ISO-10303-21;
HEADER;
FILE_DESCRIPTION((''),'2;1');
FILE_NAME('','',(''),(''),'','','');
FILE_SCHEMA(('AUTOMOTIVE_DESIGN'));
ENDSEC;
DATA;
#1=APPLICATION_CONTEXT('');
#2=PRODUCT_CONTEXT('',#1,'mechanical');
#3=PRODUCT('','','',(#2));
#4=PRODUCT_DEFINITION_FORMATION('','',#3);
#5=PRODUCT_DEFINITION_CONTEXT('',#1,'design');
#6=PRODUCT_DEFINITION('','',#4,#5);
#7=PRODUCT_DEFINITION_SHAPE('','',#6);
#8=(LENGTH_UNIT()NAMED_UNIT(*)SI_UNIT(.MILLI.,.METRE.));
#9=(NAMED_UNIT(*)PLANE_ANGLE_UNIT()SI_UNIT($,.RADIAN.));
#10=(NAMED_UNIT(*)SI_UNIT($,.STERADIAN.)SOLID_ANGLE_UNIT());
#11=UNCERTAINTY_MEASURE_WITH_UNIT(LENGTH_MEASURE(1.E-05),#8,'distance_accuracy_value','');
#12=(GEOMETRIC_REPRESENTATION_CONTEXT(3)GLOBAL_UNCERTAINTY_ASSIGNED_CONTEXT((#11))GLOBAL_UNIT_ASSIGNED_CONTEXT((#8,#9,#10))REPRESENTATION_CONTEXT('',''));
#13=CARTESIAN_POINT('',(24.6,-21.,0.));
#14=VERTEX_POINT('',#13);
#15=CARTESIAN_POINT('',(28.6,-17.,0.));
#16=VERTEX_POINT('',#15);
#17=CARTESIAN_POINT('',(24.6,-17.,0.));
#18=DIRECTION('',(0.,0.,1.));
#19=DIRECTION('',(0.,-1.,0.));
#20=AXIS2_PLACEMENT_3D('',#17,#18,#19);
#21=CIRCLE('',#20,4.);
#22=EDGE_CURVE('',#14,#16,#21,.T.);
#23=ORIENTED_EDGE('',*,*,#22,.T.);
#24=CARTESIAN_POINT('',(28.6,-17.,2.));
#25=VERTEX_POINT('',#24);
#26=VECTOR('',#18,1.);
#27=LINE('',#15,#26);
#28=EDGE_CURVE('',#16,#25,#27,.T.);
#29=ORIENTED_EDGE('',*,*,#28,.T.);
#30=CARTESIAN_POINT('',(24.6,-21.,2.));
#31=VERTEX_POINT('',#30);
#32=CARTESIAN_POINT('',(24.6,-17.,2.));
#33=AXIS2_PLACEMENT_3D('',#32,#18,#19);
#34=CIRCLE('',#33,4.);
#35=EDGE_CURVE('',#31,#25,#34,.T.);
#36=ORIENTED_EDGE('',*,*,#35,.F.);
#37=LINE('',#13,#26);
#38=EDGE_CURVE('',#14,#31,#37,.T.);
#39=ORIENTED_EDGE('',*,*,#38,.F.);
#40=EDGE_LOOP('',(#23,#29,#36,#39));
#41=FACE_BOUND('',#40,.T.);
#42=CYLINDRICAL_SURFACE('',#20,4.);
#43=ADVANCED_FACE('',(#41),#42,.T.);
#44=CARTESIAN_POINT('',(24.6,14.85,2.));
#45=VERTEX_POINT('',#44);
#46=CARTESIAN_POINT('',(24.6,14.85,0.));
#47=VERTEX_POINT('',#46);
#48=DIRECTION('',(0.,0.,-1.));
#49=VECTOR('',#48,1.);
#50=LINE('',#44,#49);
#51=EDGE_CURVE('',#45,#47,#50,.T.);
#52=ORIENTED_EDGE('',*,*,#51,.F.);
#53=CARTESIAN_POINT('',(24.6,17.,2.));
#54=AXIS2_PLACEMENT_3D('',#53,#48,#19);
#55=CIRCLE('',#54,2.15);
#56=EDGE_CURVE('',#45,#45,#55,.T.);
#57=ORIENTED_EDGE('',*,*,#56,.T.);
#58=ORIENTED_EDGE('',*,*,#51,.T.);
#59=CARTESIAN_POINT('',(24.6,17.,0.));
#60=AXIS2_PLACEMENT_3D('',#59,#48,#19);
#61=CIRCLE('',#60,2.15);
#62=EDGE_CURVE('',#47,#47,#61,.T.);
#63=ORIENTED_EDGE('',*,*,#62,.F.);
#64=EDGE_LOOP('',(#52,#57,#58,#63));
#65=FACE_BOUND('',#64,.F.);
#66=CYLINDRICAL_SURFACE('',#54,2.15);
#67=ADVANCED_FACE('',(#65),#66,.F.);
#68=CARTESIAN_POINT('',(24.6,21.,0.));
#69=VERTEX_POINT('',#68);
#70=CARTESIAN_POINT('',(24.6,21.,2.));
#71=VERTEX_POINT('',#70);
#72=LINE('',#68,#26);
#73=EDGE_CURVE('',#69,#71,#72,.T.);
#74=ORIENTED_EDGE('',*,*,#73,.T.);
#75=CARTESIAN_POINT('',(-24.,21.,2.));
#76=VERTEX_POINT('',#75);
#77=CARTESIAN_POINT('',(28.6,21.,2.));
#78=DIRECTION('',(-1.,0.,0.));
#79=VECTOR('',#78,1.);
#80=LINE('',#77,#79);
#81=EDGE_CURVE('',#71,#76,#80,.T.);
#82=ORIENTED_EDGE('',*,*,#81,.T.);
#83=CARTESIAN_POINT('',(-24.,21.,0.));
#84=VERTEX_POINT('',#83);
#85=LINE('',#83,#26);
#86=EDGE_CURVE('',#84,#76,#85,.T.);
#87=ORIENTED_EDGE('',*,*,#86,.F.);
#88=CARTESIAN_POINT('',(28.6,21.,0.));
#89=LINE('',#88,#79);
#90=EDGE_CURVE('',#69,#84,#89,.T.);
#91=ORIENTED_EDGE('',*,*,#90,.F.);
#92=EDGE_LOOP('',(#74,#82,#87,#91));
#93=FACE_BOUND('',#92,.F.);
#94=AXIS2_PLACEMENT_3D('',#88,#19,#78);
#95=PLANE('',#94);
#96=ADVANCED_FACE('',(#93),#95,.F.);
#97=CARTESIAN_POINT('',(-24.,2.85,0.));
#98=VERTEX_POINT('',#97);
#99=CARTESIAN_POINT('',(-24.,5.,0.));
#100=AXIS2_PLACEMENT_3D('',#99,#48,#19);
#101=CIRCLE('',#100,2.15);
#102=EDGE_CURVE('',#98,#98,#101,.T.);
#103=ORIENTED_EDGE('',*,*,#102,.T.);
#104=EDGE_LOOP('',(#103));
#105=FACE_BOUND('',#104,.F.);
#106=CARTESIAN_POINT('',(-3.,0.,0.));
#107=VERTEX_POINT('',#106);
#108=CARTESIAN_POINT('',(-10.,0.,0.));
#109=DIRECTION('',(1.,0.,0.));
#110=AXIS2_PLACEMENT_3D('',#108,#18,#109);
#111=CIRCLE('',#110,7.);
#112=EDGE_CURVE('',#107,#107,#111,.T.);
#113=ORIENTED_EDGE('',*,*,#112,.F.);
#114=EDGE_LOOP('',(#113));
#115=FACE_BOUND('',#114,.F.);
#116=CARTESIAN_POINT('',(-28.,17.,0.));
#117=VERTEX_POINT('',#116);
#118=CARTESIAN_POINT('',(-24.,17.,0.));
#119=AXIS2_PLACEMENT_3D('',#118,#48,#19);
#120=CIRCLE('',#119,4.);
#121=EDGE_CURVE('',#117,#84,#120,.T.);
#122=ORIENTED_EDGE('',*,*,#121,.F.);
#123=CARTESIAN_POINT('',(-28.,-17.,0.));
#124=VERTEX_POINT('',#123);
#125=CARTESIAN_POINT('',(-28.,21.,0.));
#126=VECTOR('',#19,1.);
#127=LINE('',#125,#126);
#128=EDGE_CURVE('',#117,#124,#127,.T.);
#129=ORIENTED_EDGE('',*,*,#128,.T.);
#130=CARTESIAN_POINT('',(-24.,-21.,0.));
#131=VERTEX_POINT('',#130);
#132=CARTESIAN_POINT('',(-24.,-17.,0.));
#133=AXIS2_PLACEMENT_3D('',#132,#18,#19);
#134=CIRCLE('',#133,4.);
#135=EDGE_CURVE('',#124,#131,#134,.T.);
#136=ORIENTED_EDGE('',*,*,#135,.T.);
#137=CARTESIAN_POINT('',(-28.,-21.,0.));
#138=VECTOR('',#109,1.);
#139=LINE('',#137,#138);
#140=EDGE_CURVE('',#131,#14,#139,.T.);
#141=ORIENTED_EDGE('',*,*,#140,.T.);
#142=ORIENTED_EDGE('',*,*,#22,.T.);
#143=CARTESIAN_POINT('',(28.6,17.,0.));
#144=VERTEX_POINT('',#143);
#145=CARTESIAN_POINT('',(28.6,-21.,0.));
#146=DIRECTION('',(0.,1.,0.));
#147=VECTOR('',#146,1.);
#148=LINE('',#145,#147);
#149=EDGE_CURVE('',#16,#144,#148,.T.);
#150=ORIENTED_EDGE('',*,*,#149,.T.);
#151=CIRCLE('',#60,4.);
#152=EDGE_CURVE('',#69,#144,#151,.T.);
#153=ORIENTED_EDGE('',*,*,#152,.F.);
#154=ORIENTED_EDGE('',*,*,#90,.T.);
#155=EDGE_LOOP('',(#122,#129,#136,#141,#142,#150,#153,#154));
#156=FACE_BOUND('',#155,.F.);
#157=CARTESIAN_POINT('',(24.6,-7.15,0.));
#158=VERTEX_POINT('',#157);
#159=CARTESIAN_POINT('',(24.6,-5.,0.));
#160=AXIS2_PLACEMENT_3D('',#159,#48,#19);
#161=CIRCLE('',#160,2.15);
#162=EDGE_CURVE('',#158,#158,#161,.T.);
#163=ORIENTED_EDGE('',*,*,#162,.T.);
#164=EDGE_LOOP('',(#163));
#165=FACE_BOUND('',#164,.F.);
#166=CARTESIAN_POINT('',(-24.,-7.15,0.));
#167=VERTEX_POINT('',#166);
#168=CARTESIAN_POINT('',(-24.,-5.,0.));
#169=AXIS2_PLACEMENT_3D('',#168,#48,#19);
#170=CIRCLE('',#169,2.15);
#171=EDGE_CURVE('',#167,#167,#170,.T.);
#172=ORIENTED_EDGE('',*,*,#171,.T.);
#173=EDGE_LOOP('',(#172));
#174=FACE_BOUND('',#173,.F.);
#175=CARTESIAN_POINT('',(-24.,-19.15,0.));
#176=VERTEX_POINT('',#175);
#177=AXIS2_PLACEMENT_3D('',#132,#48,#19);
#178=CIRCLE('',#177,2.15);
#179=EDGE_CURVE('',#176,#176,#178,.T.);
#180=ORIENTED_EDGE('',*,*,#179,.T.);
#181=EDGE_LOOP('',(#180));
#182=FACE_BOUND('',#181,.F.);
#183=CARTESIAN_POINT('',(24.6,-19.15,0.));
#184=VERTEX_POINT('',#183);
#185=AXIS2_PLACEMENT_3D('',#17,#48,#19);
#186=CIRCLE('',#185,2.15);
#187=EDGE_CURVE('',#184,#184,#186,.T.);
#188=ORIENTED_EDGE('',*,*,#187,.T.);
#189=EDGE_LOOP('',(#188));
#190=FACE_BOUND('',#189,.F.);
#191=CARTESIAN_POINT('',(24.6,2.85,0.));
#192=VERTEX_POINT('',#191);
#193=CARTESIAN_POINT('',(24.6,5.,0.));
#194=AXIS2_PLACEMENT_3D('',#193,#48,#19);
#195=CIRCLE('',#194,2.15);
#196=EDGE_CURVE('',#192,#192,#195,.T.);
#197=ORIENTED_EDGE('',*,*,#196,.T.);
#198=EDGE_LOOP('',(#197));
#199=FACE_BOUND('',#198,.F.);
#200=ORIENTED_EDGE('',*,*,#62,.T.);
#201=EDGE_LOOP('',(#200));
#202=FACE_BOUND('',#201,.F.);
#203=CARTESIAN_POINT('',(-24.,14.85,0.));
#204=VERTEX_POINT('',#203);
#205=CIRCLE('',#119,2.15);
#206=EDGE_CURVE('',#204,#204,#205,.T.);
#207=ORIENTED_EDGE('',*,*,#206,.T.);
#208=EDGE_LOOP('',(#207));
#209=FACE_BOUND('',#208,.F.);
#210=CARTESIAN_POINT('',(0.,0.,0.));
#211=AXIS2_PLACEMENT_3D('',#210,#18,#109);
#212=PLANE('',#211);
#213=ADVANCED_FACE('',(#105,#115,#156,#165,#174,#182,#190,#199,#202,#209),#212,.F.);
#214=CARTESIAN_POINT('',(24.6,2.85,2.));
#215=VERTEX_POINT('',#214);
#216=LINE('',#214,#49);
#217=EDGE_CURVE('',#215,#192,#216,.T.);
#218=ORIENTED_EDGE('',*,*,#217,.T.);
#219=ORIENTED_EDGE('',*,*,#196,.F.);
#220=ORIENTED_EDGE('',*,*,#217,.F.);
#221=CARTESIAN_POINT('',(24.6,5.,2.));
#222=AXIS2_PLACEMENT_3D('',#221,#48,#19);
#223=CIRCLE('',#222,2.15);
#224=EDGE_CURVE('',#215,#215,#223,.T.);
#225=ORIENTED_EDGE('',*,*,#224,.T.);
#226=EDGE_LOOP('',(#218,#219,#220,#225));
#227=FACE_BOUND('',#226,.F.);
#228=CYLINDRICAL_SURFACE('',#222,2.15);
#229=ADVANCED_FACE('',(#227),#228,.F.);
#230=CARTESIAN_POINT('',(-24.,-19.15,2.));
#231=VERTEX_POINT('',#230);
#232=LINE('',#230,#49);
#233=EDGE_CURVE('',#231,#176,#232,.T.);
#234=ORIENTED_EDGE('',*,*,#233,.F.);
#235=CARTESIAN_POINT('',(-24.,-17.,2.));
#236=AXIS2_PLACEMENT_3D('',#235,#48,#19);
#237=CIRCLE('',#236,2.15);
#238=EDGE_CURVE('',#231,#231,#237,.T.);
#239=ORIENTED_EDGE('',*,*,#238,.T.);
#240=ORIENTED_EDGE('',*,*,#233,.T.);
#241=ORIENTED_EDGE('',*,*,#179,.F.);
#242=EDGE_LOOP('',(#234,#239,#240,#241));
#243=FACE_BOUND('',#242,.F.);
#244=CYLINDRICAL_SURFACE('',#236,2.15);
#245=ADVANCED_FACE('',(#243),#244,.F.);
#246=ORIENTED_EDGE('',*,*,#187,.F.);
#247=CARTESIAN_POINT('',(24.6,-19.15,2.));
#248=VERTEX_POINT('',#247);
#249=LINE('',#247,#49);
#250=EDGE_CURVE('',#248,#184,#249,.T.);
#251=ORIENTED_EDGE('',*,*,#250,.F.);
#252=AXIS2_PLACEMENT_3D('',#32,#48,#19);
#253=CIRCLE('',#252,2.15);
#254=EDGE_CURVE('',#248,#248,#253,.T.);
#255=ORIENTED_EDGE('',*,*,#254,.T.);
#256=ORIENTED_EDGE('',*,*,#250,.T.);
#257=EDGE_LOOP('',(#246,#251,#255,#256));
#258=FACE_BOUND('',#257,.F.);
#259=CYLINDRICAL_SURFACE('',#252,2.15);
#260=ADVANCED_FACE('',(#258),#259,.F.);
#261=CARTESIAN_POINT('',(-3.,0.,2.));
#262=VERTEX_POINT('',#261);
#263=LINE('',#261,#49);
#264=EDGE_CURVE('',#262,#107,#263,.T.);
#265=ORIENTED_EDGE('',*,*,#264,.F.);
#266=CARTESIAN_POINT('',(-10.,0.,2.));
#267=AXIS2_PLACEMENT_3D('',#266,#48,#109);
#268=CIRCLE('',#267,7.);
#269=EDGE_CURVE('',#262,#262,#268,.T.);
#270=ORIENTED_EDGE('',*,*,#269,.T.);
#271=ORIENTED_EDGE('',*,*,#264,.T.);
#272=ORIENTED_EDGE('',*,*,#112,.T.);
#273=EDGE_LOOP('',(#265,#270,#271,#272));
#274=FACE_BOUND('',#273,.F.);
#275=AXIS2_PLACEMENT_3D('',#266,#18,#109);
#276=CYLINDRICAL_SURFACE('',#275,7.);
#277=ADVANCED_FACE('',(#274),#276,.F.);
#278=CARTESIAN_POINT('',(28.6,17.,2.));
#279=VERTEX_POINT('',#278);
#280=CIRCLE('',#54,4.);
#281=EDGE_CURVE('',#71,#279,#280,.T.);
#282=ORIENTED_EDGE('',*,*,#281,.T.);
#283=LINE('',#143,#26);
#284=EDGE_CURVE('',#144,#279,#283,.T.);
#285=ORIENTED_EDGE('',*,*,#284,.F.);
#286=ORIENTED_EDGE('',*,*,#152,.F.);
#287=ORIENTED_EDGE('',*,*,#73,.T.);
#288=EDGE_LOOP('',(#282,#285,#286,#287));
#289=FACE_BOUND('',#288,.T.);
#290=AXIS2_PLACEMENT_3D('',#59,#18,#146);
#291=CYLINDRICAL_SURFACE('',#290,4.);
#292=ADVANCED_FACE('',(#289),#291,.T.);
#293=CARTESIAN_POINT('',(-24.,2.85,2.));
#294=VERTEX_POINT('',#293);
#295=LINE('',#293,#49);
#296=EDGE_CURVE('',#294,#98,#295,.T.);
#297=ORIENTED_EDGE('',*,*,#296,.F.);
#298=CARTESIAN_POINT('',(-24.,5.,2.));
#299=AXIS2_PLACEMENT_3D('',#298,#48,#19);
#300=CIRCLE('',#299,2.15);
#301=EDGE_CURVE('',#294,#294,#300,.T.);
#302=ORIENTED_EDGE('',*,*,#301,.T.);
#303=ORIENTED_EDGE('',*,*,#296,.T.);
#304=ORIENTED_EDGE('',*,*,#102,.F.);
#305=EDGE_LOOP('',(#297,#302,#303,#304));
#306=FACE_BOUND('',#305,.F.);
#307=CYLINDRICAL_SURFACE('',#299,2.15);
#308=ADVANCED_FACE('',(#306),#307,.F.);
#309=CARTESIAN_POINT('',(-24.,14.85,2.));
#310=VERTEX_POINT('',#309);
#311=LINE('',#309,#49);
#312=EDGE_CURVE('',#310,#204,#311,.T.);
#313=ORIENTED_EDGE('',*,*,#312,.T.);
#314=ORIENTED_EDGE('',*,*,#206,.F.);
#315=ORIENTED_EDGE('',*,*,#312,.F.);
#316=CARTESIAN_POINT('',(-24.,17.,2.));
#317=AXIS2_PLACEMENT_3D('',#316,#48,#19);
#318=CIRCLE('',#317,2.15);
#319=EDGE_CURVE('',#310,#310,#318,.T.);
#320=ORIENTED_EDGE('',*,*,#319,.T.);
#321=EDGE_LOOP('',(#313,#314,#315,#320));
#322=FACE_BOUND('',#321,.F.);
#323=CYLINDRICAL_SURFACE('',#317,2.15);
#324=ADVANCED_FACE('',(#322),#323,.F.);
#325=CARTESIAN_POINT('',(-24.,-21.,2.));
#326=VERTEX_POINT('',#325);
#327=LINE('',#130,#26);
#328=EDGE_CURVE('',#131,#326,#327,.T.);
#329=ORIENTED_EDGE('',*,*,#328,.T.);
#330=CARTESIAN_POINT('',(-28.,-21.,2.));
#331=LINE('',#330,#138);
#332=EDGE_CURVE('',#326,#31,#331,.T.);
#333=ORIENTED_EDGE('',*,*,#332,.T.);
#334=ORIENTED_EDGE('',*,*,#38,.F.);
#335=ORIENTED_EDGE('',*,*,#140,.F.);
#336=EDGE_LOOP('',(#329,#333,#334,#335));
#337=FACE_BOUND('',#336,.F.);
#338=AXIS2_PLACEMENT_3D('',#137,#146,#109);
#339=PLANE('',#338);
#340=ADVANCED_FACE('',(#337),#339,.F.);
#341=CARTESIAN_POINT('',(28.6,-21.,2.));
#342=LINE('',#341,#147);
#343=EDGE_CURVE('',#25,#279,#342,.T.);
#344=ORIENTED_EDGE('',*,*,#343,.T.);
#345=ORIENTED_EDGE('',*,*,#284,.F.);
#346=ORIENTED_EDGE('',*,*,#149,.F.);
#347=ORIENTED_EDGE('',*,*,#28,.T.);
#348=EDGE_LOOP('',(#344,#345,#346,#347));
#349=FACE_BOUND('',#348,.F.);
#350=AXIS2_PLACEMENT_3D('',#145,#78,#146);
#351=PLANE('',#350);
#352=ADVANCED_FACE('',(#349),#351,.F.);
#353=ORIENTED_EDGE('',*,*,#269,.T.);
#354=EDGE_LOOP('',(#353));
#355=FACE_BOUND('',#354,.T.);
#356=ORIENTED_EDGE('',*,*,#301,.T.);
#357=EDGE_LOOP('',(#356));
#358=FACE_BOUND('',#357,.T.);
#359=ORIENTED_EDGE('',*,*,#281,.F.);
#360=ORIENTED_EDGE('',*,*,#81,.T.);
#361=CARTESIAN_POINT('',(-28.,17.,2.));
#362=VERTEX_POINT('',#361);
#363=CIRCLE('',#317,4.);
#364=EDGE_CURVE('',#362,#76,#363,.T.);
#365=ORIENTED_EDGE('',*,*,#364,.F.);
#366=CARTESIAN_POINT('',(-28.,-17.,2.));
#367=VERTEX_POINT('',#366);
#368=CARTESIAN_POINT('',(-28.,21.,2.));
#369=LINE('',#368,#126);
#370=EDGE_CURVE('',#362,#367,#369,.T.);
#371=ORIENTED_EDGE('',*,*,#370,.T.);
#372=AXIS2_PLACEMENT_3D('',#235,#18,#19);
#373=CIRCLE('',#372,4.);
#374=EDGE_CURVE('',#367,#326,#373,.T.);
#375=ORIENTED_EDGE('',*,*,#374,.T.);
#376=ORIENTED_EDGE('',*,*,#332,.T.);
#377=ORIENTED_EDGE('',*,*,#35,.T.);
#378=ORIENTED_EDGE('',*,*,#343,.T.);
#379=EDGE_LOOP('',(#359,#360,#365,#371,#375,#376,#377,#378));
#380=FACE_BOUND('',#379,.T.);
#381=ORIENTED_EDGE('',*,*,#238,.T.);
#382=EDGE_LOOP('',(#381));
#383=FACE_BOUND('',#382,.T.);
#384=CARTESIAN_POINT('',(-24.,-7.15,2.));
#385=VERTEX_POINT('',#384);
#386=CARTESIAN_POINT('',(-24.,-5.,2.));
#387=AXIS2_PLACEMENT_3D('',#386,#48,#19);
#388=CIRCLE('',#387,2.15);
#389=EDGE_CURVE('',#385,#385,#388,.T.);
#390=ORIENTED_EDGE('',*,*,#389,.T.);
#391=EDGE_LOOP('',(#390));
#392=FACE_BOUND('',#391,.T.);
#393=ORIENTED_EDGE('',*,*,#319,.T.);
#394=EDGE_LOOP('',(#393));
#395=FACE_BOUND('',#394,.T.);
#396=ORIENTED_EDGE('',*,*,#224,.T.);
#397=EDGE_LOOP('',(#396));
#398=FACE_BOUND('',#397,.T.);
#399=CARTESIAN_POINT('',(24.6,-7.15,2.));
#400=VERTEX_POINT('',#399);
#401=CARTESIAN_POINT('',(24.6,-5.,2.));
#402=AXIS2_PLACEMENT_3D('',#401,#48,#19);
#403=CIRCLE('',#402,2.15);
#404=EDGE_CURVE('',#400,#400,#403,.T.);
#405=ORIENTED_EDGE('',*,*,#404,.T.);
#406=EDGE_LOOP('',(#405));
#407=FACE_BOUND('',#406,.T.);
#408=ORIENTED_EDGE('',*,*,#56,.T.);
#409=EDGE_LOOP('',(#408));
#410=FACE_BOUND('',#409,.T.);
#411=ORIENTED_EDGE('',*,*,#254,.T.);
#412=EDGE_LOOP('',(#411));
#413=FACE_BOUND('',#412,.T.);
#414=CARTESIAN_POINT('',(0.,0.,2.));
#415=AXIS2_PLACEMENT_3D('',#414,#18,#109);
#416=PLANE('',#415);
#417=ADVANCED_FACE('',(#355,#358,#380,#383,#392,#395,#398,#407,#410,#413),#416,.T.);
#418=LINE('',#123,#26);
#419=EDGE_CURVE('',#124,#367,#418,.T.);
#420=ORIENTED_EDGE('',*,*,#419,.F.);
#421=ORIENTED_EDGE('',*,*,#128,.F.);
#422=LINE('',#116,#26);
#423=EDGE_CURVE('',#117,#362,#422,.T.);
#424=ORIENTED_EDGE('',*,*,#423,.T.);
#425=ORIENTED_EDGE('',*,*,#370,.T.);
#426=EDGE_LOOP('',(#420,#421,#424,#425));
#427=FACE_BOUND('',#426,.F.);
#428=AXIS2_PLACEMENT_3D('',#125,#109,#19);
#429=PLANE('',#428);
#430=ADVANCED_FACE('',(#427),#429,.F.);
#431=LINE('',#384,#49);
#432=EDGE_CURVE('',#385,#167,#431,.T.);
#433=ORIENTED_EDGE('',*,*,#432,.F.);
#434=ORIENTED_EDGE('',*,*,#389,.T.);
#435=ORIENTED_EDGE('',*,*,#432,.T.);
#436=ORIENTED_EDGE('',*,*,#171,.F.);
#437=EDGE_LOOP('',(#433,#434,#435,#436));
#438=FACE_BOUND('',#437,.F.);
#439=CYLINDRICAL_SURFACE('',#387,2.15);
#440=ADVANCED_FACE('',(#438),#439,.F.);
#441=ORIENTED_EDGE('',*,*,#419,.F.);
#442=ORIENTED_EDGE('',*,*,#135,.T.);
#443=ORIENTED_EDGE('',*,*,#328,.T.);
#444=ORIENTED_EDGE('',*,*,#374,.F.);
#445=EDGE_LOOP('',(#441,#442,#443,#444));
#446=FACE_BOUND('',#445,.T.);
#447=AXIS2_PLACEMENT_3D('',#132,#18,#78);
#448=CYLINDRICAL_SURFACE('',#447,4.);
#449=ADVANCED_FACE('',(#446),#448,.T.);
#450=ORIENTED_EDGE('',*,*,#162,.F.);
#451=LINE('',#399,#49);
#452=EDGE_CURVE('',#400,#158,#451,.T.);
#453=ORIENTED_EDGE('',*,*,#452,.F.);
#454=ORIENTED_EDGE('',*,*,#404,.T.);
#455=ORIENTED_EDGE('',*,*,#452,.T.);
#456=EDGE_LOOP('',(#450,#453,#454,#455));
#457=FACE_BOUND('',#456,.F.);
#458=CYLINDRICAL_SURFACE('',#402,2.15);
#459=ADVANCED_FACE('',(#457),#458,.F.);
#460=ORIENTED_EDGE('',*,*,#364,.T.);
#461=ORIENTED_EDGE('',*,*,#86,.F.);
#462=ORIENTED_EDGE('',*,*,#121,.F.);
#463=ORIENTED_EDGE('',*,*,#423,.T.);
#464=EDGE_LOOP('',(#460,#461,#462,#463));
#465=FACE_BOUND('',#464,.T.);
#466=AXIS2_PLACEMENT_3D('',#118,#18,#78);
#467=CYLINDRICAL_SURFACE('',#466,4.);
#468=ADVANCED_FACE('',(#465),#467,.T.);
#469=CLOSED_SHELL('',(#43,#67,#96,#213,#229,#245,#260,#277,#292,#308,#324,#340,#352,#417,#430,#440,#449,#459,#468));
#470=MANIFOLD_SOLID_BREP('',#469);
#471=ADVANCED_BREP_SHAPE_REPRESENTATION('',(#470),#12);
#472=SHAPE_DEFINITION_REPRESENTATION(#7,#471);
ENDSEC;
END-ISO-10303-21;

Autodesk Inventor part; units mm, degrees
ref_plane "YZ Plane" through (0, 0, 0) normal (1, 0, 0) x (0, 1, 0)
ref_plane "XZ Plane" through (0, 0, 0) normal (0, 1, 0) x (-1, 0, 0)
ref_plane "XY Plane" through (0, 0, 0) normal (0, 0, 1) x (1, 0, 0)
sketch "スケッチ1" plane through (0, 0, 0) normal (0, 0, 1) x (1, 0, 0)
  line L0 (-28, -21) -> (28.6, -21)
  line L1 (28.6, -21) -> (28.6, 21)
  line L2 (28.6, 21) -> (-28, 21)
  line L3 (-28, 21) -> (-28, -21)
  point P0 (0, 0)
  dimension "d1" = 42
  dimension "d28" = 28
  dimension "d29" = 28.6
  dimension "d32" = 21
extrude "プレート1" add sketch "スケッチ1" along normal blind 2
sketch "スケッチ2" plane through (0, 0, 2) normal (0, 0, 1) x (1, 0, 0)
  line L0 (-24, -5) -> (24.6, -5)
  line L1 (24.6, -5) -> (24.6, 5)
  line L2 (24.6, 5) -> (-24, 5)
  line L3 (-24, 5) -> (-24, -5)
  line L4 (-24, -5) -> (24.6, 5) construction
  line L5 (24.6, -5) -> (-24, 5) construction
  line L6 (28.6, -21) -> (-28, -21) projected
  line L7 (-28, -21) -> (-28, 21) projected
  line L8 (28.6, -21) -> (-28, -21) projected
  line L9 (28.6, 21) -> (28.6, -21) projected
  line L10 (-28, 21) -> (28.6, 21) projected
  circle A0 centre (-10, 0) radius 7
  point P0 (0.3, 0)
  point P1 (0.3, 0)
  point P2 (0.3, 0)
  point P3 (0, 0)
  dimension "d3" = 48.6
  dimension "d5" = 10
  dimension "d16" = 14
  dimension "d31" = 14
  dimension "d33" = 4
  dimension "d34" = 0
hole "穴1" at (24.6, 5, 2) at (24.6, -5, 2) at (-24, 5, 2) at (-24, -5, 2) direction (0, 0, -1) diameter 4.3 end through all clearance for "Socket Head Cap Screw" size "M4" standard "Ansi Metric M Profile"
extrude "押し出し1" cut sketch "スケッチ2" against normal blind 10 contours A0 L2 L0 | L0 A0 | A0 L2
sketch "スケッチ3" plane through (0, 0, 2) normal (0, 0, 1) x (1, 0, 0)
  line L0 (-28, 21) -> (28.6, 21) projected
  line L1 (-28, -21) -> (-28, 21) projected
  line L2 (28.6, -21) -> (-28, -21) projected
  line L3 (28.6, 21) -> (28.6, -21) projected
  line L4 (24.6, 17) -> (-24, 17)
  line L5 (-24, 17) -> (-24, -17)
  line L6 (-24, -17) -> (24.6, -17)
  line L7 (24.6, -17) -> (24.6, 17)
  point P0 (0, 0)
  dimension "d19" = 4
hole "穴2" at (-24, 17, 2) at (-24, -17, 2) at (24.6, 17, 2) at (24.6, -17, 2) direction (0, 0, -1) diameter 4.3 end through all clearance for "Socket Head Cap Screw" size "M4" standard "Ansi Metric M Profile"
fillet "コーナーR1" radius 4 4 edges at (28.6, 21, 1) (-28, 21, 1) (-28, -21, 1) (28.6, -21, 1)
equation "\"d14\" = Thickness"
equation "\"d2\" = Thickness"
equation "\"d32\" = 0.5 * d1"
equation "\"BendRadius\" = Thickness"
equation "\"BendReliefWidth\" = Thickness"
equation "\"BendReliefDepth\" = 0.5 * Thickness"
equation "\"CornerReliefSize\" = 4 * Thickness"
equation "\"MinimumRemnant\" = 2 * Thickness"
equation "\"TransitionRadius\" = BendRadius"
equation "\"JacobiRadiusSize\" = BendRadius"
equation "\"GapSize\" = Thickness"
equation "\"Thickness\" = 2"
properties part number "s_carbon_plate4" material "CFRP"
